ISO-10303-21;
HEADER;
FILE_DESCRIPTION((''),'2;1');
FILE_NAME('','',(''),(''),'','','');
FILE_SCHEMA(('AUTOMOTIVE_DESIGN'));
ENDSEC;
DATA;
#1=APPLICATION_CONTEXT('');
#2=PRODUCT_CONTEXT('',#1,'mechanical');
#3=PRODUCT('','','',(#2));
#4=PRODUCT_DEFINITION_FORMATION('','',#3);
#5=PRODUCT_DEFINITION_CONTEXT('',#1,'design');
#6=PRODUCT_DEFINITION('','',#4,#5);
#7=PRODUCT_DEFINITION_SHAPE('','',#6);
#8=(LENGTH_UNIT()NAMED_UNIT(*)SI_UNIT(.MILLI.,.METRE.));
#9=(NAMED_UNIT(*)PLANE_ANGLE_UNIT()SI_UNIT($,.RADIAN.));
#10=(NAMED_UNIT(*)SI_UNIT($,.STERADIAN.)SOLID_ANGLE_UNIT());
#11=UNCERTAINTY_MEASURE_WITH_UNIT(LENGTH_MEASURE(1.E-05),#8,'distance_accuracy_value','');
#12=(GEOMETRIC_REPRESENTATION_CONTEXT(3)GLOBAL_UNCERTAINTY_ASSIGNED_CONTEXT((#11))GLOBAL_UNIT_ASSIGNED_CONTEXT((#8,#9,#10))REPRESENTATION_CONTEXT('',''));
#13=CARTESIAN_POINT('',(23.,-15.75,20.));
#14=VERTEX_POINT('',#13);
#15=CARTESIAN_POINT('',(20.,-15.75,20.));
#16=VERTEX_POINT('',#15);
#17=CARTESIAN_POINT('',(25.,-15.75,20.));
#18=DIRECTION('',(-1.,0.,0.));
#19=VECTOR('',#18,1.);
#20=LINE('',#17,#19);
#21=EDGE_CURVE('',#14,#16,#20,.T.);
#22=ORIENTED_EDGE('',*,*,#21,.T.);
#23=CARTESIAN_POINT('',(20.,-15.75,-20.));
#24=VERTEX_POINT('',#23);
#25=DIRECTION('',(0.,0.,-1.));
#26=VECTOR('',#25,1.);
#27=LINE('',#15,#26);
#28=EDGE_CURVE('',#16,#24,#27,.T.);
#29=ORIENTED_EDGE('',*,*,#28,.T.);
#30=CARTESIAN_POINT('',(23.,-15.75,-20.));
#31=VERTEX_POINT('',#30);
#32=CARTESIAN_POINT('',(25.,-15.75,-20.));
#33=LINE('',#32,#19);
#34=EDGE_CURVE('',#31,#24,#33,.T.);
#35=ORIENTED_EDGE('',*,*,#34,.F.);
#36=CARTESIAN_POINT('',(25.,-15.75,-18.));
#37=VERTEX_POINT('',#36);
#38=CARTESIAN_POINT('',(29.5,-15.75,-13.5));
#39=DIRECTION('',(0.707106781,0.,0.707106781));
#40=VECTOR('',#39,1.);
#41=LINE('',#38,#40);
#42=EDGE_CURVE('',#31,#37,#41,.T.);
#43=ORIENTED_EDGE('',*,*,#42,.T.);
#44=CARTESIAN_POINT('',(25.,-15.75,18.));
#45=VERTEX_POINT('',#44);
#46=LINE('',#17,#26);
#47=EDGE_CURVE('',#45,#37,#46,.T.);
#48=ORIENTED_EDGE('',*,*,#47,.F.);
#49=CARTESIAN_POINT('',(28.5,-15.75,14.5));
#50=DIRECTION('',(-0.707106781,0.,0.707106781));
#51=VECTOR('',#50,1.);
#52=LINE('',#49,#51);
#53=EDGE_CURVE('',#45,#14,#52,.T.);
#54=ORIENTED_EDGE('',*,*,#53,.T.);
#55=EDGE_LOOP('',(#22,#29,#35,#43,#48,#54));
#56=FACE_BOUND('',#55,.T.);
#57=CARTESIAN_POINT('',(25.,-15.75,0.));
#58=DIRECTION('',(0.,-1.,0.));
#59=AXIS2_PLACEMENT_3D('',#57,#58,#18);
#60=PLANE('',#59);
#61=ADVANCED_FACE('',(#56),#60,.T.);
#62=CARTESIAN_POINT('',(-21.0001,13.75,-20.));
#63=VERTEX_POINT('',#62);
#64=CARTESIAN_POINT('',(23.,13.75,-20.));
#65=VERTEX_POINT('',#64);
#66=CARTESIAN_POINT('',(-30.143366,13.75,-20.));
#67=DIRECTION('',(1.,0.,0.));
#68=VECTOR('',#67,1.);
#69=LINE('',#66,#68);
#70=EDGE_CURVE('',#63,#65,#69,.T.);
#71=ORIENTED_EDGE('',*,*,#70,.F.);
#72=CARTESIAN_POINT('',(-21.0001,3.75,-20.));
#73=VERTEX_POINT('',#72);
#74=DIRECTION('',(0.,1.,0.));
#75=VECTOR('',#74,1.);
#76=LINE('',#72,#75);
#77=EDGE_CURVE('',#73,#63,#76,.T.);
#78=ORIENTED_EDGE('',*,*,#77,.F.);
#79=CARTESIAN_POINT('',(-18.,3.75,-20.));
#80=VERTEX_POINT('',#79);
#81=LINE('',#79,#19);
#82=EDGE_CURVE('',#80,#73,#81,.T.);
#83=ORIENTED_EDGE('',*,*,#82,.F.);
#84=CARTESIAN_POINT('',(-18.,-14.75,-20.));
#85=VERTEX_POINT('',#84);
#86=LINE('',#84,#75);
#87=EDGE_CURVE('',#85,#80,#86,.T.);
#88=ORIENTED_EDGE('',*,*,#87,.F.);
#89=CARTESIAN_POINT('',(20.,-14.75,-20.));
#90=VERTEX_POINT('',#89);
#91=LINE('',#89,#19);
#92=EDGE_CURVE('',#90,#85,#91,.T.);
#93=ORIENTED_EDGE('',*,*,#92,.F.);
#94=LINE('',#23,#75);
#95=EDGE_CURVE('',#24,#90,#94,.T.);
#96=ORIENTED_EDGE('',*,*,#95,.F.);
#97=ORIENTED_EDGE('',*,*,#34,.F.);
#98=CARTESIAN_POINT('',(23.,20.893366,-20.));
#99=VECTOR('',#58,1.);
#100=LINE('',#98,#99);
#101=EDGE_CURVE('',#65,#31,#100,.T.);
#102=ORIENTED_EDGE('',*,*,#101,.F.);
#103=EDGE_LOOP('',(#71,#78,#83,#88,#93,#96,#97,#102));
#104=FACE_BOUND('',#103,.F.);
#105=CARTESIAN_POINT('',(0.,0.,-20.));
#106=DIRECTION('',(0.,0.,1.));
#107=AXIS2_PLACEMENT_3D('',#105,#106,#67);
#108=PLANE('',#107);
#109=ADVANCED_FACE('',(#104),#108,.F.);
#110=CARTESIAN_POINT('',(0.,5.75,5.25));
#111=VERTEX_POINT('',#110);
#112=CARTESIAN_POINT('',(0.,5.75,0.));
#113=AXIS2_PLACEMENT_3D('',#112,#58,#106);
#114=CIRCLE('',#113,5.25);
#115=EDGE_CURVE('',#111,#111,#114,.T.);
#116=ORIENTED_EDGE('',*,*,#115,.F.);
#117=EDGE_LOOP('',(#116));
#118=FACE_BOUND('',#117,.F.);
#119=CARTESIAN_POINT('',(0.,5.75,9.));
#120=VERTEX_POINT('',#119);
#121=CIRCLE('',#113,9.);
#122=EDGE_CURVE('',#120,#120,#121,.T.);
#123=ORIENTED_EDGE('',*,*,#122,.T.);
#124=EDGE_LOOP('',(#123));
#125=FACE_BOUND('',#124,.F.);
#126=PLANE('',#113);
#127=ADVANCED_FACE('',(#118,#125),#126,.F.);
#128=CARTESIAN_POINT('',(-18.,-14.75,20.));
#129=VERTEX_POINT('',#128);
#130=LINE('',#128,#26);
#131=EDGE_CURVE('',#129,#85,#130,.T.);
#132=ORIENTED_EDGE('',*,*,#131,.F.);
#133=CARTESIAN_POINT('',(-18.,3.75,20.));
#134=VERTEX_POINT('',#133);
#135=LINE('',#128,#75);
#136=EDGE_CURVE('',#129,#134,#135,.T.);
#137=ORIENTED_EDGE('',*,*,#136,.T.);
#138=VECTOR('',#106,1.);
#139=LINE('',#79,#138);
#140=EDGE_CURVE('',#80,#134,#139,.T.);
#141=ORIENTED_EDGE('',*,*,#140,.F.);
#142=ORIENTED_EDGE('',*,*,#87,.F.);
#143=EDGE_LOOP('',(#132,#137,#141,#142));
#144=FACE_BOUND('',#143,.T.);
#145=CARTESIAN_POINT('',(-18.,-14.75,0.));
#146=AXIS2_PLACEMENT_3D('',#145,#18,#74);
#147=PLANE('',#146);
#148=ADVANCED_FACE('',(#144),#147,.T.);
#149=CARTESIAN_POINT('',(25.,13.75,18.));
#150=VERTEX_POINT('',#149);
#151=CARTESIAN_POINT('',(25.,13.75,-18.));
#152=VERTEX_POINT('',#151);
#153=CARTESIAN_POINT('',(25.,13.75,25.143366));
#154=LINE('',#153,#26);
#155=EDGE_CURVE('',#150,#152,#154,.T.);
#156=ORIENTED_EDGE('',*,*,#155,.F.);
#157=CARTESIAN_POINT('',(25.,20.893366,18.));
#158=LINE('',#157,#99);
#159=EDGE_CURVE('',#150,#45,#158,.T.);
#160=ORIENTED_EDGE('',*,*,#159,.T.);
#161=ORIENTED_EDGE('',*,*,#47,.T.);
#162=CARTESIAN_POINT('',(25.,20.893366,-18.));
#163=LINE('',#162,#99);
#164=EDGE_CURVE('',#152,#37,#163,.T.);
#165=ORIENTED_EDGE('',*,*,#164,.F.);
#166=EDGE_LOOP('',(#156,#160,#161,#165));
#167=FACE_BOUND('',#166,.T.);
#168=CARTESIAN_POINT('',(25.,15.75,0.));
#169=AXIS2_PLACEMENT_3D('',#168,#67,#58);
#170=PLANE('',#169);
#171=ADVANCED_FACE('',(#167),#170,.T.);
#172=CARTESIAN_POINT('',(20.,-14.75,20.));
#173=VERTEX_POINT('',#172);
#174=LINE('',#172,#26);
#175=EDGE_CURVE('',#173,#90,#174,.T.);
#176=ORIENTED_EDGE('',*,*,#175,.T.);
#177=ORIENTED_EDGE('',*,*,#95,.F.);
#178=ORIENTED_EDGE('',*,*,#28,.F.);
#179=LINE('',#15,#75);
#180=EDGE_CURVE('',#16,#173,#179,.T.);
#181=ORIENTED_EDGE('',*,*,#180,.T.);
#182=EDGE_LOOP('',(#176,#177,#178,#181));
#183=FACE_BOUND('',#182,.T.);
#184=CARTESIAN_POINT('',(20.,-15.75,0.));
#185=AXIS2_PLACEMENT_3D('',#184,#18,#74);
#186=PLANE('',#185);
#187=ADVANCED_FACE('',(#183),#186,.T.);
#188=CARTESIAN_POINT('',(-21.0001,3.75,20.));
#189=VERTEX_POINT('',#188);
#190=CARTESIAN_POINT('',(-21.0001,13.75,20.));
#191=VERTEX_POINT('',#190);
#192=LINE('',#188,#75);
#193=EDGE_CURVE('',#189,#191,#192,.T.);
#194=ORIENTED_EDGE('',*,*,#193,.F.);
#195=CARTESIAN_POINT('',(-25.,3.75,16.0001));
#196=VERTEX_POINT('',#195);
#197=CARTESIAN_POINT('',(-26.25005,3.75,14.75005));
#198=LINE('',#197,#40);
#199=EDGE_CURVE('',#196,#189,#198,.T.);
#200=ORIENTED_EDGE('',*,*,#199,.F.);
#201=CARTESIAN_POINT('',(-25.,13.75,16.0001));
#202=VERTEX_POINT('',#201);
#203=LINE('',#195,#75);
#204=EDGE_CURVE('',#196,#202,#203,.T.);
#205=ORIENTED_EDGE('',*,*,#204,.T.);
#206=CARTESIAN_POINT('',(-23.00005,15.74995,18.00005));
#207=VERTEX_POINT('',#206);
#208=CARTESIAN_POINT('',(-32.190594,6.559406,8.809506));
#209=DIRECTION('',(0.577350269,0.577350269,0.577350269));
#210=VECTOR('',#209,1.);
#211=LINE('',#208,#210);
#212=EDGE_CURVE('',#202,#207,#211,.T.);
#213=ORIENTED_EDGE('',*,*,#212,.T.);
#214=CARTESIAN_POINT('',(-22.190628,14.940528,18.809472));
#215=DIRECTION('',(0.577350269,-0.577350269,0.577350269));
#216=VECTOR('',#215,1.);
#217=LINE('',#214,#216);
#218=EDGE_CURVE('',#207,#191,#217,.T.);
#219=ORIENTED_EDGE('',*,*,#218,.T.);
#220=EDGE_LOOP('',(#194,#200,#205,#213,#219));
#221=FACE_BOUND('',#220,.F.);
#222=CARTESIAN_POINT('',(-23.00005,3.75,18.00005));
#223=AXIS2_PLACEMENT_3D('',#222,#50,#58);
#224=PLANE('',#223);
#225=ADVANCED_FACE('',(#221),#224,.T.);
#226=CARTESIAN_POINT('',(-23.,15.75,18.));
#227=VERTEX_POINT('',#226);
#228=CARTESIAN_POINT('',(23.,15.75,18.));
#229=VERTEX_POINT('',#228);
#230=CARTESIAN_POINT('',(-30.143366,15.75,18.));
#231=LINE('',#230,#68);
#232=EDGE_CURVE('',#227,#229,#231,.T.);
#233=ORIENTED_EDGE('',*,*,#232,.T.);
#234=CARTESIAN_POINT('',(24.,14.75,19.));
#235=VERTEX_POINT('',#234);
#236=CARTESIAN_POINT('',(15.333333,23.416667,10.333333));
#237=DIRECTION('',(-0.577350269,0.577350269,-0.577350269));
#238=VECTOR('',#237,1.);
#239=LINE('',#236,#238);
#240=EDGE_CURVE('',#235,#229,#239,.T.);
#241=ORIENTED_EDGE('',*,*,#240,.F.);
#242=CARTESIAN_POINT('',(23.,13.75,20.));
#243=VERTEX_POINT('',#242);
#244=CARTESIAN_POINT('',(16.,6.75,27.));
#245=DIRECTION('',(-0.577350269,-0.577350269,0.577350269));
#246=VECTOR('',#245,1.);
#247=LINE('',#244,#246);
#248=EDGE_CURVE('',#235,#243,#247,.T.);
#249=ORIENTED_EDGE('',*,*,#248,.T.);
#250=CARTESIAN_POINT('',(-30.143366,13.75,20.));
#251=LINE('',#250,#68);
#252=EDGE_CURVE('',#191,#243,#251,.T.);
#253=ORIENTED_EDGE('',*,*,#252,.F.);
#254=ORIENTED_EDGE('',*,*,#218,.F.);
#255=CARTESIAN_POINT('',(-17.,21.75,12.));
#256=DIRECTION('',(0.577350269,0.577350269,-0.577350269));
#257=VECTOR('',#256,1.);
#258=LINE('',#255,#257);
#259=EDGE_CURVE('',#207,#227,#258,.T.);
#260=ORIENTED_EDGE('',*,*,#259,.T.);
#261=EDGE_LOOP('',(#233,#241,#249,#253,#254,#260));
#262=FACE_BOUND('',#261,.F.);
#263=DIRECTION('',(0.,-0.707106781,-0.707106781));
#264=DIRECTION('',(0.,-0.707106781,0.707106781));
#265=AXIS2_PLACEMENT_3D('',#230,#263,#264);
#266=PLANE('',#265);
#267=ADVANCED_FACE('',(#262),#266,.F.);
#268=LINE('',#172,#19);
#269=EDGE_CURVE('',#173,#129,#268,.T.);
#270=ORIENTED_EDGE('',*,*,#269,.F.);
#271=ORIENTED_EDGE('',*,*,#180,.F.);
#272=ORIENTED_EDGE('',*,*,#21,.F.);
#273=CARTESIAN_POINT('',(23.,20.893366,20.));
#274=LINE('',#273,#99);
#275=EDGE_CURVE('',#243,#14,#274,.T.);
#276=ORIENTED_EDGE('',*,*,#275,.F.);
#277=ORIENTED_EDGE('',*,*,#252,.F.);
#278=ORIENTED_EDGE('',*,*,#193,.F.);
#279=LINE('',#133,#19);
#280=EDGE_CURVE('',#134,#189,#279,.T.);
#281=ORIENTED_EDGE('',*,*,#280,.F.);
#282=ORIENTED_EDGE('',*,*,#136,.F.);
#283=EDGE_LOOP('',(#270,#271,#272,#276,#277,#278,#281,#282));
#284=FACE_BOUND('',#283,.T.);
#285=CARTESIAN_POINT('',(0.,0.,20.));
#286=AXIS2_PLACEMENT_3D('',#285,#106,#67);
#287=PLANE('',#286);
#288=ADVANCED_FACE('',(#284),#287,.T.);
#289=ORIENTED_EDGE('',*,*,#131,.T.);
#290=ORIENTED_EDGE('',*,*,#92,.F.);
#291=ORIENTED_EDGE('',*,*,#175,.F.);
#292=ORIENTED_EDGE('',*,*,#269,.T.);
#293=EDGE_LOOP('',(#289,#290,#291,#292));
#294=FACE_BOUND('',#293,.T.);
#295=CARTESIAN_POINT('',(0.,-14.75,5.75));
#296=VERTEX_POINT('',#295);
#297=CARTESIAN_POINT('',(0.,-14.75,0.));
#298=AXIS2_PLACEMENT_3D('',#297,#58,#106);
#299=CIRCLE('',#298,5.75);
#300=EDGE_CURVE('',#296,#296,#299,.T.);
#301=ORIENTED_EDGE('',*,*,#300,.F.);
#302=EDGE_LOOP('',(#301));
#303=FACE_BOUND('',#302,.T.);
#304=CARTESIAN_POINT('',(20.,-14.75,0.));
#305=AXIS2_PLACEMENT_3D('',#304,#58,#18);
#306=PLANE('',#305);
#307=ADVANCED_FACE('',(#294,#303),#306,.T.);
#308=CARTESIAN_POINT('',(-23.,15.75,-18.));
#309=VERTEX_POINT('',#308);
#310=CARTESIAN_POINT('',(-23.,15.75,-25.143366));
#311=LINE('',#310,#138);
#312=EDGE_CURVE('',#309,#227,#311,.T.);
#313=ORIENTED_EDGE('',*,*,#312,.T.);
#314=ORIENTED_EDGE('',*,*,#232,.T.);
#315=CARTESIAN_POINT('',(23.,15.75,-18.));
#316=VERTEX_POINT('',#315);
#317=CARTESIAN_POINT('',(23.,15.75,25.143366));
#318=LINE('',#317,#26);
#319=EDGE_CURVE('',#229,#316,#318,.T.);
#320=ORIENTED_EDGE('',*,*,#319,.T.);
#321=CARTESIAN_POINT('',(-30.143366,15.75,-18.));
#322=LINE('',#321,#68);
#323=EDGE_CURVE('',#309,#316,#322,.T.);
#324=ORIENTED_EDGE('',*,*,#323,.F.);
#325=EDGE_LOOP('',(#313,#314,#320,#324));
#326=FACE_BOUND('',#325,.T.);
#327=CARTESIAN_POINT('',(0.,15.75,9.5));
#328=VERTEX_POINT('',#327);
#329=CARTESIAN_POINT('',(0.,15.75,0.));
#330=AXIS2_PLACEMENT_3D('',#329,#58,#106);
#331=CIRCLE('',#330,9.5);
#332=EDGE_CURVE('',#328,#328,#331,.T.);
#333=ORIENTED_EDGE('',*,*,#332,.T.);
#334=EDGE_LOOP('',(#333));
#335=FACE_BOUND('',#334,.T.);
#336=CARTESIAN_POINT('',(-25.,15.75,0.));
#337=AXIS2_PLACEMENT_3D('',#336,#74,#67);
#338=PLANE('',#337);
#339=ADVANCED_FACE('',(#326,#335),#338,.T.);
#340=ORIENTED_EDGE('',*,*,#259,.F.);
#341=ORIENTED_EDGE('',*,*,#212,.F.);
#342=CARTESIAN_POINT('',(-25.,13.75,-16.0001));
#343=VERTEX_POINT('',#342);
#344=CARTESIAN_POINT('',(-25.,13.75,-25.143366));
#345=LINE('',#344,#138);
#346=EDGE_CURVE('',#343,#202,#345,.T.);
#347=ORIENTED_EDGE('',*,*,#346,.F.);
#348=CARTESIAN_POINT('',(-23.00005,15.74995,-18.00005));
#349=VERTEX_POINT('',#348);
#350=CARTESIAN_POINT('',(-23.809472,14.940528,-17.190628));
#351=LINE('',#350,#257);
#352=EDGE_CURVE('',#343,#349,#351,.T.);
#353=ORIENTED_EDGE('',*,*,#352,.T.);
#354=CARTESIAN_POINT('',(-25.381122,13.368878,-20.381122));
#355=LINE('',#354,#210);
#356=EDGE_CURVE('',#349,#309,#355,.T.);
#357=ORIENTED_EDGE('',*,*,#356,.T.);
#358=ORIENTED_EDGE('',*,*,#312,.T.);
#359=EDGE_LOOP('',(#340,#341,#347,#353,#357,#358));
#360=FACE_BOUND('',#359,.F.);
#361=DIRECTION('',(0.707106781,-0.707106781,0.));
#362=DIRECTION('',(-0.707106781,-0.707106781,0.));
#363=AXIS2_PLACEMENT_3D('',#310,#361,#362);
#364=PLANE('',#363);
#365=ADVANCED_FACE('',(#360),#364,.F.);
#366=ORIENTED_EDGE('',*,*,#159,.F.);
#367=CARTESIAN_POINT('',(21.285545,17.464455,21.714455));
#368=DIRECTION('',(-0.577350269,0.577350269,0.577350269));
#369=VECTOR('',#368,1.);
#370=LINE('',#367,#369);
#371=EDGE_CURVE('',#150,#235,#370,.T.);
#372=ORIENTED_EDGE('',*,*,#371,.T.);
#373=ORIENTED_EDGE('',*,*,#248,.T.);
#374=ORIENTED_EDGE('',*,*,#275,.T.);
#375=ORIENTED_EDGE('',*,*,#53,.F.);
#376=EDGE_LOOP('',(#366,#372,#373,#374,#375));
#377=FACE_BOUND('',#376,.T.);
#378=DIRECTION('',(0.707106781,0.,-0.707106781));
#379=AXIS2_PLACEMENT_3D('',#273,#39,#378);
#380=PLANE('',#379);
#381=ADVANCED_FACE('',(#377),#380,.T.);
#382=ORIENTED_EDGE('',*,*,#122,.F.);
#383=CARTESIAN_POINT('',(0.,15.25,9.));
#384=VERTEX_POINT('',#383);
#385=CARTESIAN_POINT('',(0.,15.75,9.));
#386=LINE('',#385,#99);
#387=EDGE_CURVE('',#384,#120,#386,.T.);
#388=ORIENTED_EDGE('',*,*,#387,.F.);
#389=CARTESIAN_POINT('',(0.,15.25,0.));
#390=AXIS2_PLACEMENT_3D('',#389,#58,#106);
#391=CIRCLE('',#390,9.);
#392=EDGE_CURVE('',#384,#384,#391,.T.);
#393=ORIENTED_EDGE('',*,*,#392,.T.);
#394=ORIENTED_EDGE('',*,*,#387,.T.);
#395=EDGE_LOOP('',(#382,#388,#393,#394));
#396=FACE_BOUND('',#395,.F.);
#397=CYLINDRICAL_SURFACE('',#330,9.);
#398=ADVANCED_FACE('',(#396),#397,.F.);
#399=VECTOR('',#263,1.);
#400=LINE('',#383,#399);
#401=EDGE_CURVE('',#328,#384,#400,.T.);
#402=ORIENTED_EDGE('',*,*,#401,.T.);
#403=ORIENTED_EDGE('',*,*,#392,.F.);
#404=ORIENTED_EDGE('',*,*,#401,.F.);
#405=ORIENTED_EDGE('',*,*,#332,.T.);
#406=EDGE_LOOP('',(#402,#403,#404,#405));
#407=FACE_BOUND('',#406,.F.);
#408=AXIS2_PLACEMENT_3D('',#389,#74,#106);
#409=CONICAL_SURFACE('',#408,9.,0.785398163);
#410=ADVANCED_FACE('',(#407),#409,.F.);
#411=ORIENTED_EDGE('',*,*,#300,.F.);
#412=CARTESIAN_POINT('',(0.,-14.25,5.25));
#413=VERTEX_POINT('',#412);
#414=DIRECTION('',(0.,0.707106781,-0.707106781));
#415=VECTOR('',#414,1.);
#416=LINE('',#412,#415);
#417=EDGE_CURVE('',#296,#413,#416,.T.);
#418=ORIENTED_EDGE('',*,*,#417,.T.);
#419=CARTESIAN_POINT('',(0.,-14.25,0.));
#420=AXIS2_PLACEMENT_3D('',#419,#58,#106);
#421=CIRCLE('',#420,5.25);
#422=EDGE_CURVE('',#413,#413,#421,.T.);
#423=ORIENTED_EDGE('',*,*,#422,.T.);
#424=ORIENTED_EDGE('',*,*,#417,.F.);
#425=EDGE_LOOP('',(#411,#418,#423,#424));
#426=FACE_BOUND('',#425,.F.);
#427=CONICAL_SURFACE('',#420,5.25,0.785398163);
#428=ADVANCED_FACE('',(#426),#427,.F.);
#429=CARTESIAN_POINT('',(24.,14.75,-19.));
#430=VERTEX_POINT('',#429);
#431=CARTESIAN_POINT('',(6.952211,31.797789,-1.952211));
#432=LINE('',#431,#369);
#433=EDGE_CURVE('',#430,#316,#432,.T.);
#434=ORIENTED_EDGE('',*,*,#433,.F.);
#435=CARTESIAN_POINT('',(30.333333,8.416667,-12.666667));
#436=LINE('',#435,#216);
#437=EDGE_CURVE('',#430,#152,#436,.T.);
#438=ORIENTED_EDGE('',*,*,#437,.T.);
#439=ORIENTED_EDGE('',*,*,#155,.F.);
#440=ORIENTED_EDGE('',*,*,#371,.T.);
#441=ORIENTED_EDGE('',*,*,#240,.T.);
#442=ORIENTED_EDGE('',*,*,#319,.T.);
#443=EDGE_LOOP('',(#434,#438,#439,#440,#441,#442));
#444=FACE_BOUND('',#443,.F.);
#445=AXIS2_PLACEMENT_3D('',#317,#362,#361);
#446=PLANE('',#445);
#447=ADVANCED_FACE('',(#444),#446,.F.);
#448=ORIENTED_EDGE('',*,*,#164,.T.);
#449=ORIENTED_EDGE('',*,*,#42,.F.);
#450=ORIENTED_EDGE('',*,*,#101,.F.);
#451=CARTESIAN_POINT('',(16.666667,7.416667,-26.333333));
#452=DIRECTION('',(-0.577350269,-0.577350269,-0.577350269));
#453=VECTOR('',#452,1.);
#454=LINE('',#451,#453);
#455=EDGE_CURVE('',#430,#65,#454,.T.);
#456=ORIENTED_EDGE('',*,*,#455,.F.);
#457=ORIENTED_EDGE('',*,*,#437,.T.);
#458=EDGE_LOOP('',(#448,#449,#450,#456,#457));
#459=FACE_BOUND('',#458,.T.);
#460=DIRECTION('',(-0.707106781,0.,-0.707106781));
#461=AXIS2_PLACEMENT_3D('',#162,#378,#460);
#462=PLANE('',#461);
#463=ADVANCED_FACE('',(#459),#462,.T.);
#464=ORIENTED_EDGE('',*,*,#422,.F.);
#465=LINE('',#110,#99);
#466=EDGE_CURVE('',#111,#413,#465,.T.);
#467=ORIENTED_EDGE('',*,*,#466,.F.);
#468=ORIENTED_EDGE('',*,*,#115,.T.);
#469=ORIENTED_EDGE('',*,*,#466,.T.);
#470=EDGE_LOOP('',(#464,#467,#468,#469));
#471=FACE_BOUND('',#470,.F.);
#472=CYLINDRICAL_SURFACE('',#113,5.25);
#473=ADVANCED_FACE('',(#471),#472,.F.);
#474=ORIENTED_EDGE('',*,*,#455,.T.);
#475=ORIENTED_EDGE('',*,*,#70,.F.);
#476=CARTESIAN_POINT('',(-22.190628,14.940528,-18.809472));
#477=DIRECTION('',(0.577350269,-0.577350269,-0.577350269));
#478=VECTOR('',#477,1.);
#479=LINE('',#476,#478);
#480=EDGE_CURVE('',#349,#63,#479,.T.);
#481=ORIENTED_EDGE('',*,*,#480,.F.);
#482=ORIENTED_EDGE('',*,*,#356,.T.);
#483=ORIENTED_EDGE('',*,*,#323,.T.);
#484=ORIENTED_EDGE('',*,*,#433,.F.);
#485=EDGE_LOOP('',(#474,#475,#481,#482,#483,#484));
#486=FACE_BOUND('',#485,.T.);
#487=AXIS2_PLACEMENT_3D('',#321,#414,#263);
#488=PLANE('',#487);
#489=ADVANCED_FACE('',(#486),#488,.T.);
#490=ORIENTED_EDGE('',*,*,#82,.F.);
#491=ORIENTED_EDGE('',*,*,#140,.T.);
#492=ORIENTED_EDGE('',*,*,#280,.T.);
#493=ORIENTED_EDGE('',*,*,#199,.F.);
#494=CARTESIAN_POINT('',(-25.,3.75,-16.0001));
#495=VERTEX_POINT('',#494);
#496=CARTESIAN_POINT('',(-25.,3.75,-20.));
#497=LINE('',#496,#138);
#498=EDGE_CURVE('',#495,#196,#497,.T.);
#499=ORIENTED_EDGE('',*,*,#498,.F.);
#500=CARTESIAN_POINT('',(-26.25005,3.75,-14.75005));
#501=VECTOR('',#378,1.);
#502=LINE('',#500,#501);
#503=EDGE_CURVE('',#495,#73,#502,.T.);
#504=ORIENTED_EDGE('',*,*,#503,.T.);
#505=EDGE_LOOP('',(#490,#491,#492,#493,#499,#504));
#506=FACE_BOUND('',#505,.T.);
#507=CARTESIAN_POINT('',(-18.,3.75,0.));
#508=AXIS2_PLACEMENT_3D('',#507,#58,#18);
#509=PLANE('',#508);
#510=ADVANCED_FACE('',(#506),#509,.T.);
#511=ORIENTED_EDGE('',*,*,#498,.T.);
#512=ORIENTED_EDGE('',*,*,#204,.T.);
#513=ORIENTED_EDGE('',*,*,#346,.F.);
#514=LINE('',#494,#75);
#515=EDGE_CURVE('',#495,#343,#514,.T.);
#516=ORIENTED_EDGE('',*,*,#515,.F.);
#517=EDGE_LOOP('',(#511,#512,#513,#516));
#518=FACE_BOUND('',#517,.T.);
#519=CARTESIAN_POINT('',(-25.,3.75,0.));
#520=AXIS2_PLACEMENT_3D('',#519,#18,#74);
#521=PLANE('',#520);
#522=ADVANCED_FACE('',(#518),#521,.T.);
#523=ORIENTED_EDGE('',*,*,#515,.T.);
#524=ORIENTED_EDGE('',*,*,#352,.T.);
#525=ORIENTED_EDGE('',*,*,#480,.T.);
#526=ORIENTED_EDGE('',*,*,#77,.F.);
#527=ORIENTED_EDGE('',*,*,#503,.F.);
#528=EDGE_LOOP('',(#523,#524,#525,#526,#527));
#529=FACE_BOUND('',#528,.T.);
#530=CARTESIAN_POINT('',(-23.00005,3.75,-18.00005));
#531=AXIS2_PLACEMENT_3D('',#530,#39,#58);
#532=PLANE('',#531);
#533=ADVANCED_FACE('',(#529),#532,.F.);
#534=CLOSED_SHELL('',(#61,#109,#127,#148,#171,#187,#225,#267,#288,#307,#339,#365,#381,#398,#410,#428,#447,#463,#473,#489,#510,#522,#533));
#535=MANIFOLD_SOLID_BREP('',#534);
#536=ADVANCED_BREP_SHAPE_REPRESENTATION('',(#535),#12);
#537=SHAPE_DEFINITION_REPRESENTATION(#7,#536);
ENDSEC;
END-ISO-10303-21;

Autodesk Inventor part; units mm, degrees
ref_plane "YZ Plane" through (0, 0, 0) normal (1, 0, 0) x (0, 1, 0)
ref_plane "XZ Plane" through (0, 0, 0) normal (0, 1, 0) x (-1, 0, 0)
ref_plane "XY Plane" through (0, 0, 0) normal (0, 0, 1) x (1, 0, 0)
sketch "Sketch1" plane through (0, 0, 0) normal (0, 0, 1) x (1, 0, 0)
  line L0 (-25, 15.75) -> (25, 15.75)
  line L1 (25, 15.75) -> (25, -15.75)
  line L2 (25, -15.75) -> (20, -15.75)
  line L3 (20, -15.75) -> (20, -14.75)
  line L4 (20, -14.75) -> (-18, -14.75)
  line L5 (-18, -14.75) -> (-18, 3.75)
  line L6 (-18, 3.75) -> (-25, 3.75)
  line L7 (-25, 3.75) -> (-25, 15.75)
  line L8 (-35, 0) -> (35, 0) construction
  line L9 (0, -22.05) -> (0, 22.05) construction
  point P0 (0, 0)
  dimension "d0" = 50
  dimension "d1" = 31.5
  dimension "d2" = 1
  dimension "d3" = 7
  dimension "d5" = 5
  dimension "d24" = 12
  dimension "d25" = 19.5
extrude "Extrusion1" add sketch "Sketch1" along normal mid plane 40
sketch "Sketch2" plane through (-25, 15.75, 20) normal (0, 1, 0) x (1, 0, 0)
  line L0 (45, 40) -> (45, 0) construction
  line L1 (7, 0) -> (45, 0) construction
  line L2 (7, 40) -> (7, 0) construction
  line L3 (45, 40) -> (7, 40) construction
  line L4 (0, 40) -> (50, 40) projected
  line L5 (25, 40) -> (25, 0)
  line L6 (50, 0) -> (0, 0) projected
  point P0 (25, 20)
  point P1 (25, 20)
  dimension "d23" = 18
  dimension "d26" = 38
hole "Hole1" at (0, 15.75, 0) direction (0, -1, 0) diameter 10.5 end through all counterbore diameter 18 counterbore depth 10
chamfer "Chamfer1" distance 2 angle 45 6 edges at (-25, 15.75, 0) (0, 15.75, 20) (0, 15.75, -20) (25, 15.75, 0) (25, 0, 20) (25, 0, -20)
chamfer "Chamfer2" distance 4 angle 45 2 edges at (-25, 8.75, 20) (-25, 8.75, -20)
chamfer "Chamfer3" distance 0.5 angle 45 1 edges at (0, -14.75, -5.25)
chamfer "Chamfer4" distance 0.5 angle 45 1 edges at (0, 15.75, -9)
properties part number "VTC1-001"
